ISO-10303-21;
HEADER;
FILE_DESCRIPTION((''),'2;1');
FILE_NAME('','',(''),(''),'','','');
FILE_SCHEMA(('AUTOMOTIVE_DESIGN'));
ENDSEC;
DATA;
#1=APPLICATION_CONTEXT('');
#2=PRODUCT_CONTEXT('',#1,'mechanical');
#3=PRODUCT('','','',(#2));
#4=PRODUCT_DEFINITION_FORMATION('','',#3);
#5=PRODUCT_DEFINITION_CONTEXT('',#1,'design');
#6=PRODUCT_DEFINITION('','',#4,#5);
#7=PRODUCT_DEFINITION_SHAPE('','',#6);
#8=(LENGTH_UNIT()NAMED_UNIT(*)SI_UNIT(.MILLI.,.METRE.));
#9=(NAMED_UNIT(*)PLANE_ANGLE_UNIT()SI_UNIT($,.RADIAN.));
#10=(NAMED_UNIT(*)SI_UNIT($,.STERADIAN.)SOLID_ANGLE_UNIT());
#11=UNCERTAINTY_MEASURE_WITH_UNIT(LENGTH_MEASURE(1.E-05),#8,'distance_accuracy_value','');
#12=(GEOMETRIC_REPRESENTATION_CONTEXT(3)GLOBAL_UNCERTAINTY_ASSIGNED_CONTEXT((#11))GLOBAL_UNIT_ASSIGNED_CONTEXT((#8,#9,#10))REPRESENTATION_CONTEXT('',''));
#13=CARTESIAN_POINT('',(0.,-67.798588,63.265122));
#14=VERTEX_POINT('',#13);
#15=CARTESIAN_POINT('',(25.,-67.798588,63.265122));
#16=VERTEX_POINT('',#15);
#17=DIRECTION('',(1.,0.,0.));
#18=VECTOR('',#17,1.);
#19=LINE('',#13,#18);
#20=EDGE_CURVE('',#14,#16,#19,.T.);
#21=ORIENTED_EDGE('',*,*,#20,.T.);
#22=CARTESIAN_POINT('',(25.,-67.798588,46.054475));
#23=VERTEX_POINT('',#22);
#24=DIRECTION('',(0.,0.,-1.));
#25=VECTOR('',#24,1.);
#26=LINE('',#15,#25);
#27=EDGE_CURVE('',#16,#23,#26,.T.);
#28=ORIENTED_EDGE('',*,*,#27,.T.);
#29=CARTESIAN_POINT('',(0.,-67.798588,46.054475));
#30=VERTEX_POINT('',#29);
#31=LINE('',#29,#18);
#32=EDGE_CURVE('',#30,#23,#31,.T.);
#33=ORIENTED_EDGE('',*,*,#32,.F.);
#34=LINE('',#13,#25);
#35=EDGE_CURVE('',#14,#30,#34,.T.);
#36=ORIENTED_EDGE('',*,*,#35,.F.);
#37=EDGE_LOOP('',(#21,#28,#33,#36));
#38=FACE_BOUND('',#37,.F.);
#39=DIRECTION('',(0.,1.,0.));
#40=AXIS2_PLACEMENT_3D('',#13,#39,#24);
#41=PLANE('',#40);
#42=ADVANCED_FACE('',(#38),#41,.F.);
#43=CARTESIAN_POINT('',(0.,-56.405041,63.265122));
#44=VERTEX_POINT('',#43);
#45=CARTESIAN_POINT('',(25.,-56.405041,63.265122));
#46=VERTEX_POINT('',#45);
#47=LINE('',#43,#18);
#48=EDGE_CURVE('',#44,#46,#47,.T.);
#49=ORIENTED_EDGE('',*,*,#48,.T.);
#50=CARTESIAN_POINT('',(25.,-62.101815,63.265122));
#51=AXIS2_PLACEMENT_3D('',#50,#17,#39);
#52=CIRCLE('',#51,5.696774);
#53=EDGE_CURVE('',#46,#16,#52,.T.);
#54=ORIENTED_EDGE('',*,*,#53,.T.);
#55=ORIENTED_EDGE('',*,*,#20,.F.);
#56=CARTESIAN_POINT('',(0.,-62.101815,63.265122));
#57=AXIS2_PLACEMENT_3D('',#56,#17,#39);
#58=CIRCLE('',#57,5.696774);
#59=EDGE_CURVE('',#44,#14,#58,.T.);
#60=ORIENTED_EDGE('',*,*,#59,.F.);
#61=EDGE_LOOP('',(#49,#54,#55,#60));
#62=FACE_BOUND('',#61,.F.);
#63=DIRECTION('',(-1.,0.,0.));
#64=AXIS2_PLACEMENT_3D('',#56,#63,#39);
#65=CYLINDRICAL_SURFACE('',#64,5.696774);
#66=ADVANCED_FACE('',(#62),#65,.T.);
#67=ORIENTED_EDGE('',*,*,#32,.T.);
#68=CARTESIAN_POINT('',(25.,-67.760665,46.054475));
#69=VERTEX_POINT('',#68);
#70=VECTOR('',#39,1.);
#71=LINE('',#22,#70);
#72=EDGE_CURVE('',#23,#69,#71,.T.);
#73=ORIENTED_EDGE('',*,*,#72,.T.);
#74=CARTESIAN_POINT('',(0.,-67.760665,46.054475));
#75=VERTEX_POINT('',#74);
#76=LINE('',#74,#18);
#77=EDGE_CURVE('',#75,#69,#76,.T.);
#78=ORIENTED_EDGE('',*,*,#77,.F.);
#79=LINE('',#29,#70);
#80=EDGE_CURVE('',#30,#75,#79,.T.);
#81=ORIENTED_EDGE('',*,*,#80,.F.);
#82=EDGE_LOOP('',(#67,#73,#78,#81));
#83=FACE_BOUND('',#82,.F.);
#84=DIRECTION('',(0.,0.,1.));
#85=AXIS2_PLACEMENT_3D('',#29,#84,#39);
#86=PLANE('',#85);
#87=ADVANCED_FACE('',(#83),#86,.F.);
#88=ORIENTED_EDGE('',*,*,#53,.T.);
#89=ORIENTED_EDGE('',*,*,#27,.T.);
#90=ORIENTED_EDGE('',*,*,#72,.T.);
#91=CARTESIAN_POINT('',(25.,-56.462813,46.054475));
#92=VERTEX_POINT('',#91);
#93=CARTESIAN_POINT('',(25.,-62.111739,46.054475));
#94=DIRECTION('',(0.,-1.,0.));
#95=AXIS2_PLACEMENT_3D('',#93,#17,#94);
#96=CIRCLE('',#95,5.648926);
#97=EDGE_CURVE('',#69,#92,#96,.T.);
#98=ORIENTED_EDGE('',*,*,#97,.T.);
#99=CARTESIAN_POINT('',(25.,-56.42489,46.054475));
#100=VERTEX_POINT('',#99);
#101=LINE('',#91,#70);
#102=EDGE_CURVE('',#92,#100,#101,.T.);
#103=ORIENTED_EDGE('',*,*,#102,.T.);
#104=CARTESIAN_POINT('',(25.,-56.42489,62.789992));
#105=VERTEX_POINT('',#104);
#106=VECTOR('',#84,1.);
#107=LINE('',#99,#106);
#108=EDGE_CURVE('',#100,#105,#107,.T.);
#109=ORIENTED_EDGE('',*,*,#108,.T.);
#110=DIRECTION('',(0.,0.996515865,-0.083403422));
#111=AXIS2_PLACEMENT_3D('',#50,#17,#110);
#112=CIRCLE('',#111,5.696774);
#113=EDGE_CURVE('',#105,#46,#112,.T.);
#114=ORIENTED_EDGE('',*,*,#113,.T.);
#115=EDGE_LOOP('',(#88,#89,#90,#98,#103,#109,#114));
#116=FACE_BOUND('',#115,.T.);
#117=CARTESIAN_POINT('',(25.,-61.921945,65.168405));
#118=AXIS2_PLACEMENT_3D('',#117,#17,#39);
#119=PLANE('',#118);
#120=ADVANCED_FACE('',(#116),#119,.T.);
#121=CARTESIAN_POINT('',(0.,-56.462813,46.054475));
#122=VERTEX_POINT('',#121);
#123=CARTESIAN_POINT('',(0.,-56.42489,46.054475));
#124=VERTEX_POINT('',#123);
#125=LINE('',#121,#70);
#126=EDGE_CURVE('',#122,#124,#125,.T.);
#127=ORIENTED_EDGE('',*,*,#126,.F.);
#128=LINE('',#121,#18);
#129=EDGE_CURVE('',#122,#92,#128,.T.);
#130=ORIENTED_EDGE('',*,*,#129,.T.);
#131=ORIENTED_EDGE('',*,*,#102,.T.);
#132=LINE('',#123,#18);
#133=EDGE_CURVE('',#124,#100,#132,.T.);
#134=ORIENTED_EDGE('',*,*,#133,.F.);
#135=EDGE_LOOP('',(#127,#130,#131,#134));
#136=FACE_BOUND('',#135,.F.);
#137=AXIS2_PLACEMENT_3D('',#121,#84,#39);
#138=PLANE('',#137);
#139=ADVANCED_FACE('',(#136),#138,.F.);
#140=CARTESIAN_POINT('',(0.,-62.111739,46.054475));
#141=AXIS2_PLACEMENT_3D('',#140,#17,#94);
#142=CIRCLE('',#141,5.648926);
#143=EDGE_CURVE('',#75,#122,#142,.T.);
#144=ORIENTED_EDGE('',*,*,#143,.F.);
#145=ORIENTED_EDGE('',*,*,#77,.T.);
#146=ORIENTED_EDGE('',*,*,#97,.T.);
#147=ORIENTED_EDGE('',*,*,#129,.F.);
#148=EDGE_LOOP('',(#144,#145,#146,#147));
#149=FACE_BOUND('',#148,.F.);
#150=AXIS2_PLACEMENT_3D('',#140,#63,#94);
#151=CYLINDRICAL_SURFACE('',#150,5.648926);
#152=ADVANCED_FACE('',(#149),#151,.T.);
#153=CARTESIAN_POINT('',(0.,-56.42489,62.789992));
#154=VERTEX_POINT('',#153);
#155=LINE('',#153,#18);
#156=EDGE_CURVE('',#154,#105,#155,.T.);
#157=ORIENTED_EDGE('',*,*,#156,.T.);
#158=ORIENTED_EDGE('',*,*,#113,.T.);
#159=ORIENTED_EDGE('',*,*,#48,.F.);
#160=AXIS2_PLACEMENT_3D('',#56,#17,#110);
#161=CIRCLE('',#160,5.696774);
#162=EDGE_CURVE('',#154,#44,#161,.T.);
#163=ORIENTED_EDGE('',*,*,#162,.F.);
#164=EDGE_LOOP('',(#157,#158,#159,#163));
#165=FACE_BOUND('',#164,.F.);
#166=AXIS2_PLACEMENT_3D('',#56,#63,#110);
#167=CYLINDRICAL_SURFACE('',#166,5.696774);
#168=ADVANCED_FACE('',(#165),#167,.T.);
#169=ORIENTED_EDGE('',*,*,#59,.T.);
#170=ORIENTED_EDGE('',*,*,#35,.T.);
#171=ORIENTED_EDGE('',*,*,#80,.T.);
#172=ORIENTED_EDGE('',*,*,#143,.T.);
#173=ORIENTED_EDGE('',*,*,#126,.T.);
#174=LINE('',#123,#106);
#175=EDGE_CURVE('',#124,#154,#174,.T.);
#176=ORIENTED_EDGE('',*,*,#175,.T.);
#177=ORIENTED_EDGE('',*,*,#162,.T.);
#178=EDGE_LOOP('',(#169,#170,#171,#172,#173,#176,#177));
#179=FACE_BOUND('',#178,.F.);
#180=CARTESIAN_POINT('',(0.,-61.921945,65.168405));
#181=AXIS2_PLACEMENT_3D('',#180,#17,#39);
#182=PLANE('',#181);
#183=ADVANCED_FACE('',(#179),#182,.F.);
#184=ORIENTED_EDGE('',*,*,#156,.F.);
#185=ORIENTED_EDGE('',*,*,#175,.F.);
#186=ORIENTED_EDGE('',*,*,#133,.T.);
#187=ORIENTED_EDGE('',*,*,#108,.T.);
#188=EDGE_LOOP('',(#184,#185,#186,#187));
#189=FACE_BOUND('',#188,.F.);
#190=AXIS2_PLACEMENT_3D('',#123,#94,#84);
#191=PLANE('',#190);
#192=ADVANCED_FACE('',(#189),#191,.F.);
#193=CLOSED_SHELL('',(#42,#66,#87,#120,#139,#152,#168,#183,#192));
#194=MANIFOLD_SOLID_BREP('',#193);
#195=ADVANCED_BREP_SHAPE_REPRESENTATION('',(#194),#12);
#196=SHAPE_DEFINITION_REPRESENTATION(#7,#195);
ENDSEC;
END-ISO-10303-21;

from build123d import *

# Parameters (mm, degrees)
F3_DEPTH = 25


# Not quite as in the source:
# - the program builds the solid bodies; features that only make, move or delete a surface that nothing else refers to are left out


with BuildPart() as f3:
    # F2 (on Right) → F3 (new body)
    with BuildSketch(Plane.YZ):
        with BuildLine():
            ThreePointArc((-56.4248897135, 62.7899920644), (-56.4100056303, 63.0273500708), (-56.4050413852, 63.2651224732))
            ThreePointArc((-56.4050413852, 63.2651224732), (-62.1018148959, 68.9618959839), (-67.7985884065, 63.2651224732))
            Line((-67.7985884065, 63.2651224732), (-56.4248897135, 63.2651224732))
            Line((-56.4248897135, 63.2651224732), (-56.4248897135, 62.7899920644))
        make_face()
        with BuildLine():
            Line((-56.4628131563, 46.0544750094), (-67.7606649638, 46.0544750094))
            ThreePointArc((-67.7606649638, 46.0544750094), (-62.11173906, 40.4055491057), (-56.4628131563, 46.0544750094))
        make_face()
        with BuildLine():
            Line((-56.4248897135, 63.2651224732), (-67.7985884065, 63.2651224732))
            ThreePointArc((-67.7985884065, 63.2651224732), (-62.3395872983, 57.5733132076), (-56.4248897135, 62.7899920644))
            Line((-56.4248897135, 62.7899920644), (-56.4248897135, 63.2651224732))
        make_face()
        with BuildLine():
            ThreePointArc((-56.4248897135, 62.7899920644), (-62.3395872983, 57.5733132076), (-67.7985884065, 63.2651224732))
            Line((-67.7985884065, 63.2651224732), (-67.7985884065, 46.0544750094))
            Line((-67.7985884065, 46.0544750094), (-67.7606649638, 46.0544750094))
            ThreePointArc((-67.7606649638, 46.0544750094), (-62.11173906, 51.7034009132), (-56.4628131563, 46.0544750094))
            Line((-56.4628131563, 46.0544750094), (-56.4248897135, 46.0544750094))
            Line((-56.4248897135, 46.0544750094), (-56.4248897135, 62.7899920644))
        make_face()
        with BuildLine():
            ThreePointArc((-56.4628131563, 46.0544750094), (-62.11173906, 51.7034009132), (-67.7606649638, 46.0544750094))
            Line((-67.7606649638, 46.0544750094), (-56.4628131563, 46.0544750094))
        make_face()
    extrude(amount=F3_DEPTH)


solid = f3.part
